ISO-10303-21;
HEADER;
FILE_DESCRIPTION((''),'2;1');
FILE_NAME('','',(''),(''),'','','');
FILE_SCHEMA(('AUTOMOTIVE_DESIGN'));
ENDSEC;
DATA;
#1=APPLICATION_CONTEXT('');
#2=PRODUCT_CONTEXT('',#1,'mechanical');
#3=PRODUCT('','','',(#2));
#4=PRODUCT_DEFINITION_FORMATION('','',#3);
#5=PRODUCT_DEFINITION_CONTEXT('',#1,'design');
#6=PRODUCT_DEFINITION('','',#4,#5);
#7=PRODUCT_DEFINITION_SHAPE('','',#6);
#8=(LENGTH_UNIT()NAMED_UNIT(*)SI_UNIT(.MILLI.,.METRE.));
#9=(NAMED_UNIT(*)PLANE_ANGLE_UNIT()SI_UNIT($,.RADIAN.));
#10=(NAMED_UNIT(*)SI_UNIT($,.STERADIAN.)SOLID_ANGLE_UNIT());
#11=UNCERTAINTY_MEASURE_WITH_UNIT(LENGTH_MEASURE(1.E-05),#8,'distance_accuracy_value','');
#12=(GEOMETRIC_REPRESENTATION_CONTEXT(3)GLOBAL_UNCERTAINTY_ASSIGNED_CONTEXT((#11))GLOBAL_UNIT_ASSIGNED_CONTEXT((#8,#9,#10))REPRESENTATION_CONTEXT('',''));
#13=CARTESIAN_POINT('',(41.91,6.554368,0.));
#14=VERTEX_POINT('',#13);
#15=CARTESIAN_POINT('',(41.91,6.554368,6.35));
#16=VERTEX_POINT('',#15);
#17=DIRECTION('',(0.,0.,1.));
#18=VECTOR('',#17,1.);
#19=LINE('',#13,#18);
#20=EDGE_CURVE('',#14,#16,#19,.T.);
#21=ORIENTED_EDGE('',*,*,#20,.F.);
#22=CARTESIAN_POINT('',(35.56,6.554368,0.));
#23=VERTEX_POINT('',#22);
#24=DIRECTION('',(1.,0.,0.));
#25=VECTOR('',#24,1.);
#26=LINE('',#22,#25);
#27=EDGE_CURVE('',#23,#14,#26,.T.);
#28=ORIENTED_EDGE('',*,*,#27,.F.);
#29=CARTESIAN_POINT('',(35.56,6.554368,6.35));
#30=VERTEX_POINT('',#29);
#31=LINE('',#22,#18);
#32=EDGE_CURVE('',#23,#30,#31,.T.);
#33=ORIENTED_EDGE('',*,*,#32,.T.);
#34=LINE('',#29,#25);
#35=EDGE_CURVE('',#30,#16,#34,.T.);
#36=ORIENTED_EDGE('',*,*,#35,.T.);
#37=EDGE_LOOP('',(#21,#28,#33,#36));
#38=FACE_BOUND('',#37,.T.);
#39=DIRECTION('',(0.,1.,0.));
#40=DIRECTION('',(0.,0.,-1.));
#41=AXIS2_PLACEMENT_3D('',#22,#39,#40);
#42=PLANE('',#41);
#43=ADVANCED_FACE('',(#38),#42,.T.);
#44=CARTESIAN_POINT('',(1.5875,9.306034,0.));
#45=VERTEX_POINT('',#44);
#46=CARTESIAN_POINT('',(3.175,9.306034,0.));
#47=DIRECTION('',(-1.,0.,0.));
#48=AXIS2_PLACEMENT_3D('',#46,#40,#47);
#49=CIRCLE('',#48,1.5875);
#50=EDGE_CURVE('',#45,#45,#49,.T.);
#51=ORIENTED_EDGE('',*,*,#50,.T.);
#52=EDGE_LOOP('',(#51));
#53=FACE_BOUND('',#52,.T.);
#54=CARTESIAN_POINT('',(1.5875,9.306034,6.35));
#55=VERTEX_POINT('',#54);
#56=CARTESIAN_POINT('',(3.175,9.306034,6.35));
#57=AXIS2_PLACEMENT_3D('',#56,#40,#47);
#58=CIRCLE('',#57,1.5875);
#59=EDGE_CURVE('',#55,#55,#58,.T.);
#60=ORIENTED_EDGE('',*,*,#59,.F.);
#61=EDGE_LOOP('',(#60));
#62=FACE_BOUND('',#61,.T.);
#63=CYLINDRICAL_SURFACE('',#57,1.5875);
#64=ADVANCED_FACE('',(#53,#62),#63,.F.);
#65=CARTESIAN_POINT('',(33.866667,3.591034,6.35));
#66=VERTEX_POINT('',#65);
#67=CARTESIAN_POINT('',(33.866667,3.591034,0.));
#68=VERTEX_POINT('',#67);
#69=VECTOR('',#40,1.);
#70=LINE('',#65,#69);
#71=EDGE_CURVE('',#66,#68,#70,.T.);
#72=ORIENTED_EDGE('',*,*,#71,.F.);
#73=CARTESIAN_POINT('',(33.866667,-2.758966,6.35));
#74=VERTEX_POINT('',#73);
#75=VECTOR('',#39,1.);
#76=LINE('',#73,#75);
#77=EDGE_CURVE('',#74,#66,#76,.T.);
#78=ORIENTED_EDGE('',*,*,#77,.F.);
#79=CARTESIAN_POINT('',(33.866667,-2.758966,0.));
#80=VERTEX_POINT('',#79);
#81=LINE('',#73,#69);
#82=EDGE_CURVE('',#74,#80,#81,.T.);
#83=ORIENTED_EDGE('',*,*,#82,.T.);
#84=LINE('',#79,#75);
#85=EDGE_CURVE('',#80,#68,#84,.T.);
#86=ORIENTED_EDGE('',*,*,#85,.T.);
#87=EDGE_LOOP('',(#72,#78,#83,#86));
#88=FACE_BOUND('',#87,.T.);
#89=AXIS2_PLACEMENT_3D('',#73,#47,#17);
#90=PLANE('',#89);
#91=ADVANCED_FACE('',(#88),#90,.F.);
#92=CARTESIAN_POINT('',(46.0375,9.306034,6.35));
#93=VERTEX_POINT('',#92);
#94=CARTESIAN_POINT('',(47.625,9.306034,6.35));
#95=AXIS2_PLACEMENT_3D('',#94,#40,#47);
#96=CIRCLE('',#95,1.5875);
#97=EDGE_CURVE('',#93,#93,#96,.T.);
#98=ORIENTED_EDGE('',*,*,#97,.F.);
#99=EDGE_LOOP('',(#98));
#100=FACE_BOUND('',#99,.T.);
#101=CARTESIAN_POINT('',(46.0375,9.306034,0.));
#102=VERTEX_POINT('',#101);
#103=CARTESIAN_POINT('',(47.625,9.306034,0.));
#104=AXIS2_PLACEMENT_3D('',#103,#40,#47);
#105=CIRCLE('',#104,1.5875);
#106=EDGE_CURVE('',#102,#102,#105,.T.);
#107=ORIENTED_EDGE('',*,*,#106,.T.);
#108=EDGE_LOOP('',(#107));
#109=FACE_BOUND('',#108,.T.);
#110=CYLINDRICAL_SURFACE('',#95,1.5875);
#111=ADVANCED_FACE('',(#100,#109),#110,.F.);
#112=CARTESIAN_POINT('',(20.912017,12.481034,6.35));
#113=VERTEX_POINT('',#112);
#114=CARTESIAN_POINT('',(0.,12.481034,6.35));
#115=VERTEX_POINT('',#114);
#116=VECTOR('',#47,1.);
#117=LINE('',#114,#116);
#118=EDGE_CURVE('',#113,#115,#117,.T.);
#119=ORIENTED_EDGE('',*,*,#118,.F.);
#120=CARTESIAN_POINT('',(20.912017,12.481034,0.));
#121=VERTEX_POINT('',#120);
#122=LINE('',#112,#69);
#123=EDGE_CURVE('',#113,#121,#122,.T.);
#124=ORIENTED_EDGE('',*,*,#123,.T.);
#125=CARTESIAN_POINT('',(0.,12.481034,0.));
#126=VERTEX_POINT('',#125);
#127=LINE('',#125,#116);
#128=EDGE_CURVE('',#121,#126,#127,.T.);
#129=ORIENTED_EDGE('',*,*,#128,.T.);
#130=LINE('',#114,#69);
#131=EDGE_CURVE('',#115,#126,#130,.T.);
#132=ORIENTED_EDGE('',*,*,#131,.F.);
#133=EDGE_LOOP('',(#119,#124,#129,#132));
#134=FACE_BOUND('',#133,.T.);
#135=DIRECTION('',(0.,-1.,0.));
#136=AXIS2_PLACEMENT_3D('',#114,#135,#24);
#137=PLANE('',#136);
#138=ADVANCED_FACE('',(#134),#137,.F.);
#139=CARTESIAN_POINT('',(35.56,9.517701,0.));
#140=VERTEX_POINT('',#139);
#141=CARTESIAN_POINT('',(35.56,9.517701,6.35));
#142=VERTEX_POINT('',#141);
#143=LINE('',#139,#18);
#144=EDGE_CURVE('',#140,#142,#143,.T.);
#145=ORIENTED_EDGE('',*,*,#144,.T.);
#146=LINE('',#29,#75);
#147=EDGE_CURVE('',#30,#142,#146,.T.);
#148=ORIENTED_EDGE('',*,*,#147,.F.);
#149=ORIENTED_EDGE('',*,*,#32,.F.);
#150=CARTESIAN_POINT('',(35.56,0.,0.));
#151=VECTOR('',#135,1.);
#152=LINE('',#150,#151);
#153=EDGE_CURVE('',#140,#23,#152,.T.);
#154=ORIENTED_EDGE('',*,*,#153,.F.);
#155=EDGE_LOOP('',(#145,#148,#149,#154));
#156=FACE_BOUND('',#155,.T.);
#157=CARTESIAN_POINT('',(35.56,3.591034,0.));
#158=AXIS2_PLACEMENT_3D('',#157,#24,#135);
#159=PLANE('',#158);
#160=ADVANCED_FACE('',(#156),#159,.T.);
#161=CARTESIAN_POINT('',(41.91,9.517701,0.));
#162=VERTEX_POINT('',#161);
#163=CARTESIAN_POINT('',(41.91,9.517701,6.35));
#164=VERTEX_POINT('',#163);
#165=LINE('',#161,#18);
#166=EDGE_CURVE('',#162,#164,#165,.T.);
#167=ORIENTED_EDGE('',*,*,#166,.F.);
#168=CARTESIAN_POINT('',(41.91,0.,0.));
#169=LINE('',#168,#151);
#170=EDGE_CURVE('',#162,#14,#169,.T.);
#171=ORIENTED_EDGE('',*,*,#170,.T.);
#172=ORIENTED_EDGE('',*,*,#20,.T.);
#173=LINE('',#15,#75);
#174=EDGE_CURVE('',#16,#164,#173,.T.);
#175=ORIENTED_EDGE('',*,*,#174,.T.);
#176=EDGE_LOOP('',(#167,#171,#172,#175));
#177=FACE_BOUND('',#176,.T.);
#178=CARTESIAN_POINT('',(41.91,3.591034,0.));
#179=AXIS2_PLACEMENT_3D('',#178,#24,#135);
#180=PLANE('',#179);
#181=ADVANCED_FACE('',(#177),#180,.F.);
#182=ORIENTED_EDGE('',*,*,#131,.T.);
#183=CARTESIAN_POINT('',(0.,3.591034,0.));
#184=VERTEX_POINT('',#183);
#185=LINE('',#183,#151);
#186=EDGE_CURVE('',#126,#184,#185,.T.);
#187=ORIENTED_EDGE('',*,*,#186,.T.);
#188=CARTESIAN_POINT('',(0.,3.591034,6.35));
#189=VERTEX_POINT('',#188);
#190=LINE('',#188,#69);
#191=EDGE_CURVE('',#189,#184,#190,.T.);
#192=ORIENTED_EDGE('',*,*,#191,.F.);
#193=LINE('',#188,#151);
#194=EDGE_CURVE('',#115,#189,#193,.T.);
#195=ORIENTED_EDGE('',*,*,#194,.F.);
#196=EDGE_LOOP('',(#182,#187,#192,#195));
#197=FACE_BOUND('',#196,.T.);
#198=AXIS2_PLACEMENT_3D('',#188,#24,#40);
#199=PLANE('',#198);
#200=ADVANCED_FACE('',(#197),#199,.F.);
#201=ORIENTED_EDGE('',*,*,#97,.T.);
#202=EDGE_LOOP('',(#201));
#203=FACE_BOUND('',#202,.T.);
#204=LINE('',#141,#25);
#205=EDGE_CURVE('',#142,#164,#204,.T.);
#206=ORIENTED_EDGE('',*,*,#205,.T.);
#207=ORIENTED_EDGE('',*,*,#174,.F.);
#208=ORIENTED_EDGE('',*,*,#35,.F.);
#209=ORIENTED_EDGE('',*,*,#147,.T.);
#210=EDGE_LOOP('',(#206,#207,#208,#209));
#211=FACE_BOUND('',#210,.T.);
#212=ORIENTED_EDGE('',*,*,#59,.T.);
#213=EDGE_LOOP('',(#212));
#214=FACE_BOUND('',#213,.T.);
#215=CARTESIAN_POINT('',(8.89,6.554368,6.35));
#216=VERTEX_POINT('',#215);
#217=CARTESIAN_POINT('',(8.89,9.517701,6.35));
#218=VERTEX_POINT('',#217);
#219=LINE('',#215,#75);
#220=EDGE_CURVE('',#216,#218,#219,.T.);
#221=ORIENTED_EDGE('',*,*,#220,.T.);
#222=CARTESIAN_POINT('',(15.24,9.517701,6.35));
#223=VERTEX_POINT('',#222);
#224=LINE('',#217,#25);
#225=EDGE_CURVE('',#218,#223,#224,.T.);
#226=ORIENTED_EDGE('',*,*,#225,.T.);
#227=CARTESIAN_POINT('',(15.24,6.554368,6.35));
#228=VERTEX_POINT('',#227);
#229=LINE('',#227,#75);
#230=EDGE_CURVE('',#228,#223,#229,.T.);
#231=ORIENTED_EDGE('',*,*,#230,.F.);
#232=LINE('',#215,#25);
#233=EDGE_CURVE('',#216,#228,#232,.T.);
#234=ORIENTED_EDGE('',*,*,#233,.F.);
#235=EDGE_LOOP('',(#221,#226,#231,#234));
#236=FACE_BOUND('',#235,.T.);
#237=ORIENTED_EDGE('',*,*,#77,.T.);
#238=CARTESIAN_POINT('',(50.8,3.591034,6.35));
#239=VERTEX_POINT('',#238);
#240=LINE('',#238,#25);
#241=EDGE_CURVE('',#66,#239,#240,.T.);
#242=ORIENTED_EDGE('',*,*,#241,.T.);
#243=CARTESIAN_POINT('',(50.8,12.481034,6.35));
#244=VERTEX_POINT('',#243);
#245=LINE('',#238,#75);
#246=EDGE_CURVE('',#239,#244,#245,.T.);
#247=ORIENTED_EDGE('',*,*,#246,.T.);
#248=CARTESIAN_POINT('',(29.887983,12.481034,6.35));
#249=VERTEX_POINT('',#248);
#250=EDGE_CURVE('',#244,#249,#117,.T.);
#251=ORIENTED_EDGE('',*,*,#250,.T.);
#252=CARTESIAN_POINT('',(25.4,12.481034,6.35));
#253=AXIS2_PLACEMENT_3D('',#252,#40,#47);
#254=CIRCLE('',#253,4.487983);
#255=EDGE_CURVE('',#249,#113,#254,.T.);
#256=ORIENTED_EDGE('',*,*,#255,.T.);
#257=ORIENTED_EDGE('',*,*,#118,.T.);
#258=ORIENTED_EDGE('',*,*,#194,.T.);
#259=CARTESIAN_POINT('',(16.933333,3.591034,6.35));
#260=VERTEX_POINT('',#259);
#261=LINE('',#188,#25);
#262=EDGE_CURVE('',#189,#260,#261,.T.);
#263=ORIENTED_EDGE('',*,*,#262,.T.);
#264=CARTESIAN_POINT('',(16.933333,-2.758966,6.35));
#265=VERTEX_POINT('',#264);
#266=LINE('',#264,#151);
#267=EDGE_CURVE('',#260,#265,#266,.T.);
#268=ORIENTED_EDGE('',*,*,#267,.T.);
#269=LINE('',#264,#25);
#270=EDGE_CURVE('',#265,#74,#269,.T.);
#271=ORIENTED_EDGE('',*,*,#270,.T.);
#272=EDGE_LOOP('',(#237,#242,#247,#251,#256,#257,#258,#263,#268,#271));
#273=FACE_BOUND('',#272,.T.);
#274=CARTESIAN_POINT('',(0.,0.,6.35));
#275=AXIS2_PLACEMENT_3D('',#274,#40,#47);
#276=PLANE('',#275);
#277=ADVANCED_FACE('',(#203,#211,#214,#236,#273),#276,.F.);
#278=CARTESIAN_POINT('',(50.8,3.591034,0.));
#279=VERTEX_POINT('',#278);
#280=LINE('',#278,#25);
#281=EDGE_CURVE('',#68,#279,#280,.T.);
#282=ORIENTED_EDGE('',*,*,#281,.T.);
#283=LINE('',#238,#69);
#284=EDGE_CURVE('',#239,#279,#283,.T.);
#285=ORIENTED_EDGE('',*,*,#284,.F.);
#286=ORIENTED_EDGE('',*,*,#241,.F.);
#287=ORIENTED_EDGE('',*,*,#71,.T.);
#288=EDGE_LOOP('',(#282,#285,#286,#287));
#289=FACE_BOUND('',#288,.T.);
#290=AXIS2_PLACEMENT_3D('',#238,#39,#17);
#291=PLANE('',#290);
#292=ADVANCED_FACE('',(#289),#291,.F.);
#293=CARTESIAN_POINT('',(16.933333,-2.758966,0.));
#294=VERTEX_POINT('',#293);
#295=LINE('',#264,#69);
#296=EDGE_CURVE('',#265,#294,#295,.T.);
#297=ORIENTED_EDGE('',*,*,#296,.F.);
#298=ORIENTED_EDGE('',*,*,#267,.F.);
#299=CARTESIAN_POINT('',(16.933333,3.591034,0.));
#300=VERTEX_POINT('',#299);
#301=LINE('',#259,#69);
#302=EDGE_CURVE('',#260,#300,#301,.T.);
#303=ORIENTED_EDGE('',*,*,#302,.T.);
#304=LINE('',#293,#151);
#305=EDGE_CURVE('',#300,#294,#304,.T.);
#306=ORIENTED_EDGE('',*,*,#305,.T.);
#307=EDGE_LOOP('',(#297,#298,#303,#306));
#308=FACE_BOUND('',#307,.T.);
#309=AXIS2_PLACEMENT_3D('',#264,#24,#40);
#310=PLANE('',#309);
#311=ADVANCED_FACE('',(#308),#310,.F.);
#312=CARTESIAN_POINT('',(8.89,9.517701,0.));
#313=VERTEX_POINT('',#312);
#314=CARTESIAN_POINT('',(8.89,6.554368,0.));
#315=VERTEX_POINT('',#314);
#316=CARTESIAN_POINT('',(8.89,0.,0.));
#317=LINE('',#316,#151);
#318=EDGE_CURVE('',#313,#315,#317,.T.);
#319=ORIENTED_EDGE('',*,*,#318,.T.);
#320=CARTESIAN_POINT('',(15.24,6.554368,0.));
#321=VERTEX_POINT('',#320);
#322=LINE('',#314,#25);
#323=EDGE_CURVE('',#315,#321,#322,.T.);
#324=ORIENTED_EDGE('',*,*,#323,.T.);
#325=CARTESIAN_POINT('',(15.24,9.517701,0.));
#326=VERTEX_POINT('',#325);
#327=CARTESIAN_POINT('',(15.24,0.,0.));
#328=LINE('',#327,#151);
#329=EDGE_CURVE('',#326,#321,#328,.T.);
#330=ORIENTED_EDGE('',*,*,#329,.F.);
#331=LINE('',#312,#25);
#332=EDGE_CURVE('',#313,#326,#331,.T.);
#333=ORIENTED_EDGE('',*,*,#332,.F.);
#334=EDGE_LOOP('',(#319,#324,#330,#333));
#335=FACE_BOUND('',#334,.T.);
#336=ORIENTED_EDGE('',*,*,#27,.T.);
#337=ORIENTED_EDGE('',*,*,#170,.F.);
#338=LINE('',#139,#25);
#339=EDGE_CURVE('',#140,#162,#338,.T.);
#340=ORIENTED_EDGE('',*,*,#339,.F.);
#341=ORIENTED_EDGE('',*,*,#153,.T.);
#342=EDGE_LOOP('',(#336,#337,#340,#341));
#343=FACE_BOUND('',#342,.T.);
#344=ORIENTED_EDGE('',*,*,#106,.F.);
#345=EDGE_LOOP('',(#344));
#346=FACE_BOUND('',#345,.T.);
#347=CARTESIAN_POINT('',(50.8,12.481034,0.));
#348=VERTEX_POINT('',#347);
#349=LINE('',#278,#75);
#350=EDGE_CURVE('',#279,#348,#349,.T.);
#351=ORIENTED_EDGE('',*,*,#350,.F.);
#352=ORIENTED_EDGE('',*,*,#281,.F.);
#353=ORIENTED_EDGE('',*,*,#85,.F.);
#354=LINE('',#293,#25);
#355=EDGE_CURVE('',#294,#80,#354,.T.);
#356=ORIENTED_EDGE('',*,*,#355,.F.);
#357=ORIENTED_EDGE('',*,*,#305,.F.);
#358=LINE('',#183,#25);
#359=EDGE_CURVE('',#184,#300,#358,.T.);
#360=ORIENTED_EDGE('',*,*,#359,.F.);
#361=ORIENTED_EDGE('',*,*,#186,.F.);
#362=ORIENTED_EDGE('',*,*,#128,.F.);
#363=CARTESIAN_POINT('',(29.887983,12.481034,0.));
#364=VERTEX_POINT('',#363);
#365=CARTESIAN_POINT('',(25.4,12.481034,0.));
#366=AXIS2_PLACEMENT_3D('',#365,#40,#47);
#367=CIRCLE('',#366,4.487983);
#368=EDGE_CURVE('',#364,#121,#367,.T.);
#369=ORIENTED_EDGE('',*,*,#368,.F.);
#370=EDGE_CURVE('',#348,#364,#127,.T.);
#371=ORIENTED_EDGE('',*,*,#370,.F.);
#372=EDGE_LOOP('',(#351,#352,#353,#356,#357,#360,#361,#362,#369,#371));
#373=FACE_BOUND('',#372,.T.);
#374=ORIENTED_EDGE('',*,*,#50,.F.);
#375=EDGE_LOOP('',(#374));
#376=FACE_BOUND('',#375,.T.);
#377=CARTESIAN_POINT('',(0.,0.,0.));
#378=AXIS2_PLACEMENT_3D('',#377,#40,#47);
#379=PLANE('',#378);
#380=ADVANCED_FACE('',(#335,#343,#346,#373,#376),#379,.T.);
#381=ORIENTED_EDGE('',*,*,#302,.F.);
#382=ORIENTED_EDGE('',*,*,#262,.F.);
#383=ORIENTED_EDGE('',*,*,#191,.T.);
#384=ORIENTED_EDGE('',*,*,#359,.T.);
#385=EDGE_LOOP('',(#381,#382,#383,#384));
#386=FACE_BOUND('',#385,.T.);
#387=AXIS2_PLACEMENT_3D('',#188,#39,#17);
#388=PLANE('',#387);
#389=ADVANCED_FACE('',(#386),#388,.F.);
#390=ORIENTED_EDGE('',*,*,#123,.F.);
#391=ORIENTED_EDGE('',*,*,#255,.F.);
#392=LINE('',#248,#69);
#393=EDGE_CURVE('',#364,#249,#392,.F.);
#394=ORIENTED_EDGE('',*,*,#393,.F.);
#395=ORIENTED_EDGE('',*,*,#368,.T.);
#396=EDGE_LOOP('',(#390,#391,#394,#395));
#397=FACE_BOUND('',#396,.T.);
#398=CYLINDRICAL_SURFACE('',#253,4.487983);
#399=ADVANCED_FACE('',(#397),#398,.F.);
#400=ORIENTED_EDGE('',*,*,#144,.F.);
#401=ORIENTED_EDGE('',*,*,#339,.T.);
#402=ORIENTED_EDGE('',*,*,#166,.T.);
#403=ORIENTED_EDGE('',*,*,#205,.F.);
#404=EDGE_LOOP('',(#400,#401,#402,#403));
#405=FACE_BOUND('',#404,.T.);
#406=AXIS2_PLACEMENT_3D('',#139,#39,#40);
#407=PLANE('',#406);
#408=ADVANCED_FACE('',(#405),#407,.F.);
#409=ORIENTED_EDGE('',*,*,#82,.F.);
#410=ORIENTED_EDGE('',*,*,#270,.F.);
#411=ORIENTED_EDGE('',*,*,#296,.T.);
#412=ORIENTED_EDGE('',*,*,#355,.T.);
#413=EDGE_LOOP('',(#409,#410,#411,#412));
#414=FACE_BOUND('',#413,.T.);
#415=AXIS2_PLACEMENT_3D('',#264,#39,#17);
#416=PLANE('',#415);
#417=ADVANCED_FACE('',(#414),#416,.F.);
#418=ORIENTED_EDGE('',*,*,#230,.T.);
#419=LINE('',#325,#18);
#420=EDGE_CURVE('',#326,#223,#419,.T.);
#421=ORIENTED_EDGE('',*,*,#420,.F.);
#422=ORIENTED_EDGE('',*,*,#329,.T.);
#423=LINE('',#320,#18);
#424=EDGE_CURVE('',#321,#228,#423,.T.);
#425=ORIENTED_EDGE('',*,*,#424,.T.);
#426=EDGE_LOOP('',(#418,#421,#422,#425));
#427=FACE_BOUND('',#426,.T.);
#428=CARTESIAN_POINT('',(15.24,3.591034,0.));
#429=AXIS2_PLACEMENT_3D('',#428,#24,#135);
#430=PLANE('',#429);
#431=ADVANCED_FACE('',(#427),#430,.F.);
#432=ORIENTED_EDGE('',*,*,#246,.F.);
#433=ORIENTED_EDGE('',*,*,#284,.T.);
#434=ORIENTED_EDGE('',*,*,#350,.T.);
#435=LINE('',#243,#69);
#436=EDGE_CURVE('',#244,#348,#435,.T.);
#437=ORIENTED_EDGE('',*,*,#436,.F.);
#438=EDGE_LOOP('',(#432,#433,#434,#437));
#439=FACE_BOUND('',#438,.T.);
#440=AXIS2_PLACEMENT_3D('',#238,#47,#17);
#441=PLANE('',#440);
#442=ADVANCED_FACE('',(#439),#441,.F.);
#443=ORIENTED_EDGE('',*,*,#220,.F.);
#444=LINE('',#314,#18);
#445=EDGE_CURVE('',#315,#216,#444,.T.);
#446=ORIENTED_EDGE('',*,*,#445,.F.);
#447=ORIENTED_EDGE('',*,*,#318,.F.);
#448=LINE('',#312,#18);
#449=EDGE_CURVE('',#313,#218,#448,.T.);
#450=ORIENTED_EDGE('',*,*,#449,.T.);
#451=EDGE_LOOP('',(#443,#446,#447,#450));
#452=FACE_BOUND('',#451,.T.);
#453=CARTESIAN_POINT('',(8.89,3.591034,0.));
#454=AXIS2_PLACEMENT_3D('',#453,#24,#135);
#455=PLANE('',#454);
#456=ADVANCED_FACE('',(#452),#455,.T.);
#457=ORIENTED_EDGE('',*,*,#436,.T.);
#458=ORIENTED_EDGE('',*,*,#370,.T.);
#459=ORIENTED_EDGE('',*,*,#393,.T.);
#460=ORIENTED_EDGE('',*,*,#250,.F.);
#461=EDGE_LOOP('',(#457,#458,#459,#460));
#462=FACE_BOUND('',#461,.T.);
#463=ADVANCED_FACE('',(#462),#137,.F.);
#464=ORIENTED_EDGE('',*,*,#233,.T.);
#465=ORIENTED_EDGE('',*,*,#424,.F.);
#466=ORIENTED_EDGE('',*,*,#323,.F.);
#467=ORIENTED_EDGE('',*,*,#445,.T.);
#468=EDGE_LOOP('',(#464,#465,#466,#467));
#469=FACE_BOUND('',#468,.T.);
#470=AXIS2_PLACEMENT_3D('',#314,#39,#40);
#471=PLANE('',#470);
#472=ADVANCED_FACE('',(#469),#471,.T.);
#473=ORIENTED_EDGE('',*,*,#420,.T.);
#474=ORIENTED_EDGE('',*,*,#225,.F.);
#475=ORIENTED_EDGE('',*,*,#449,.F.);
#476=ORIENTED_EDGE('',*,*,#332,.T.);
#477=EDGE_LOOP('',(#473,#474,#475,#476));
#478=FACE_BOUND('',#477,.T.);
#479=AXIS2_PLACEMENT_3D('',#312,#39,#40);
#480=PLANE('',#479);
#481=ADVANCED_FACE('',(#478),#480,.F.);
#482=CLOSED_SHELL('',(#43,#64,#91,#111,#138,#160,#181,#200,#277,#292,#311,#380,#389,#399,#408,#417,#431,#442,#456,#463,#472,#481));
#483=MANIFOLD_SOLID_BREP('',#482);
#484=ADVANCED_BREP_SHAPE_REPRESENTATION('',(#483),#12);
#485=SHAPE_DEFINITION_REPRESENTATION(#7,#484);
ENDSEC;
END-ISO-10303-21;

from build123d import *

# Parameters (mm, degrees)
BOSS_EXTRUDE1_DEPTH = 6.35
SKETCH2_R           = 1.5875
CUT_EXTRUDE1_DEPTH  = 53.694769397
SKETCH3_R           = 4.48798261
CUT_EXTRUDE2_DEPTH  = 53.694769397
CAVITY1_START       = 6.554367816
CAVITY1_OUTLINE_W   = 6.35
CAVITY1_OUTLINE_H   = 6.35
CAVITY1_DEPTH       = 2.963333333


# Read off the part's stored shape, not the designer's step: Cavity1
with BuildPart() as part:
    # Sketch1 → Boss-Extrude1 (new body)
    with BuildSketch(Plane.XY):
        Polygon((16.933333333, -2.758965517), (33.866666667, -2.758965517), (33.866666667, 3.591034483), (50.8, 3.591034483), (50.8, 12.481034483), (0, 12.481034483), (0, 3.591034483), (16.933333333, 3.591034483), align=None)
    extrude(amount=BOSS_EXTRUDE1_DEPTH)

    # Sketch2 → Cut-Extrude1 (cut, through all)
    with BuildSketch(Plane(origin=(0, 0, 0), x_dir=(-1, 0, 0), z_dir=(0, 0, -1))):
        with Locations((-47.625, 9.306034483)):
            Circle(SKETCH2_R)
        with Locations((-3.175, 9.306034483)):
            Circle(SKETCH2_R)
    extrude(amount=-CUT_EXTRUDE1_DEPTH, mode=Mode.SUBTRACT)

    # Sketch3 → Cut-Extrude2 (cut, through all)
    with BuildSketch(Plane(origin=(0, 0, 0), x_dir=(-1, 0, 0), z_dir=(0, 0, -1))):
        with Locations((-25.4, 12.481034483)):
            Circle(SKETCH3_R)
    extrude(amount=-CUT_EXTRUDE2_DEPTH, mode=Mode.SUBTRACT)

    # Cavity1 outline → Cavity1 (cut)
    with BuildSketch(Plane(origin=(0, 0, 0), x_dir=(1, 0, 0), z_dir=(0, 1, 0)).offset(CAVITY1_START)):
        with Locations((38.735, -3.175)):
            Rectangle(CAVITY1_OUTLINE_W, CAVITY1_OUTLINE_H)
        with Locations((12.065, -3.175)):
            Rectangle(CAVITY1_OUTLINE_W, CAVITY1_OUTLINE_H)
    extrude(amount=CAVITY1_DEPTH, mode=Mode.SUBTRACT)


solid = part.part
